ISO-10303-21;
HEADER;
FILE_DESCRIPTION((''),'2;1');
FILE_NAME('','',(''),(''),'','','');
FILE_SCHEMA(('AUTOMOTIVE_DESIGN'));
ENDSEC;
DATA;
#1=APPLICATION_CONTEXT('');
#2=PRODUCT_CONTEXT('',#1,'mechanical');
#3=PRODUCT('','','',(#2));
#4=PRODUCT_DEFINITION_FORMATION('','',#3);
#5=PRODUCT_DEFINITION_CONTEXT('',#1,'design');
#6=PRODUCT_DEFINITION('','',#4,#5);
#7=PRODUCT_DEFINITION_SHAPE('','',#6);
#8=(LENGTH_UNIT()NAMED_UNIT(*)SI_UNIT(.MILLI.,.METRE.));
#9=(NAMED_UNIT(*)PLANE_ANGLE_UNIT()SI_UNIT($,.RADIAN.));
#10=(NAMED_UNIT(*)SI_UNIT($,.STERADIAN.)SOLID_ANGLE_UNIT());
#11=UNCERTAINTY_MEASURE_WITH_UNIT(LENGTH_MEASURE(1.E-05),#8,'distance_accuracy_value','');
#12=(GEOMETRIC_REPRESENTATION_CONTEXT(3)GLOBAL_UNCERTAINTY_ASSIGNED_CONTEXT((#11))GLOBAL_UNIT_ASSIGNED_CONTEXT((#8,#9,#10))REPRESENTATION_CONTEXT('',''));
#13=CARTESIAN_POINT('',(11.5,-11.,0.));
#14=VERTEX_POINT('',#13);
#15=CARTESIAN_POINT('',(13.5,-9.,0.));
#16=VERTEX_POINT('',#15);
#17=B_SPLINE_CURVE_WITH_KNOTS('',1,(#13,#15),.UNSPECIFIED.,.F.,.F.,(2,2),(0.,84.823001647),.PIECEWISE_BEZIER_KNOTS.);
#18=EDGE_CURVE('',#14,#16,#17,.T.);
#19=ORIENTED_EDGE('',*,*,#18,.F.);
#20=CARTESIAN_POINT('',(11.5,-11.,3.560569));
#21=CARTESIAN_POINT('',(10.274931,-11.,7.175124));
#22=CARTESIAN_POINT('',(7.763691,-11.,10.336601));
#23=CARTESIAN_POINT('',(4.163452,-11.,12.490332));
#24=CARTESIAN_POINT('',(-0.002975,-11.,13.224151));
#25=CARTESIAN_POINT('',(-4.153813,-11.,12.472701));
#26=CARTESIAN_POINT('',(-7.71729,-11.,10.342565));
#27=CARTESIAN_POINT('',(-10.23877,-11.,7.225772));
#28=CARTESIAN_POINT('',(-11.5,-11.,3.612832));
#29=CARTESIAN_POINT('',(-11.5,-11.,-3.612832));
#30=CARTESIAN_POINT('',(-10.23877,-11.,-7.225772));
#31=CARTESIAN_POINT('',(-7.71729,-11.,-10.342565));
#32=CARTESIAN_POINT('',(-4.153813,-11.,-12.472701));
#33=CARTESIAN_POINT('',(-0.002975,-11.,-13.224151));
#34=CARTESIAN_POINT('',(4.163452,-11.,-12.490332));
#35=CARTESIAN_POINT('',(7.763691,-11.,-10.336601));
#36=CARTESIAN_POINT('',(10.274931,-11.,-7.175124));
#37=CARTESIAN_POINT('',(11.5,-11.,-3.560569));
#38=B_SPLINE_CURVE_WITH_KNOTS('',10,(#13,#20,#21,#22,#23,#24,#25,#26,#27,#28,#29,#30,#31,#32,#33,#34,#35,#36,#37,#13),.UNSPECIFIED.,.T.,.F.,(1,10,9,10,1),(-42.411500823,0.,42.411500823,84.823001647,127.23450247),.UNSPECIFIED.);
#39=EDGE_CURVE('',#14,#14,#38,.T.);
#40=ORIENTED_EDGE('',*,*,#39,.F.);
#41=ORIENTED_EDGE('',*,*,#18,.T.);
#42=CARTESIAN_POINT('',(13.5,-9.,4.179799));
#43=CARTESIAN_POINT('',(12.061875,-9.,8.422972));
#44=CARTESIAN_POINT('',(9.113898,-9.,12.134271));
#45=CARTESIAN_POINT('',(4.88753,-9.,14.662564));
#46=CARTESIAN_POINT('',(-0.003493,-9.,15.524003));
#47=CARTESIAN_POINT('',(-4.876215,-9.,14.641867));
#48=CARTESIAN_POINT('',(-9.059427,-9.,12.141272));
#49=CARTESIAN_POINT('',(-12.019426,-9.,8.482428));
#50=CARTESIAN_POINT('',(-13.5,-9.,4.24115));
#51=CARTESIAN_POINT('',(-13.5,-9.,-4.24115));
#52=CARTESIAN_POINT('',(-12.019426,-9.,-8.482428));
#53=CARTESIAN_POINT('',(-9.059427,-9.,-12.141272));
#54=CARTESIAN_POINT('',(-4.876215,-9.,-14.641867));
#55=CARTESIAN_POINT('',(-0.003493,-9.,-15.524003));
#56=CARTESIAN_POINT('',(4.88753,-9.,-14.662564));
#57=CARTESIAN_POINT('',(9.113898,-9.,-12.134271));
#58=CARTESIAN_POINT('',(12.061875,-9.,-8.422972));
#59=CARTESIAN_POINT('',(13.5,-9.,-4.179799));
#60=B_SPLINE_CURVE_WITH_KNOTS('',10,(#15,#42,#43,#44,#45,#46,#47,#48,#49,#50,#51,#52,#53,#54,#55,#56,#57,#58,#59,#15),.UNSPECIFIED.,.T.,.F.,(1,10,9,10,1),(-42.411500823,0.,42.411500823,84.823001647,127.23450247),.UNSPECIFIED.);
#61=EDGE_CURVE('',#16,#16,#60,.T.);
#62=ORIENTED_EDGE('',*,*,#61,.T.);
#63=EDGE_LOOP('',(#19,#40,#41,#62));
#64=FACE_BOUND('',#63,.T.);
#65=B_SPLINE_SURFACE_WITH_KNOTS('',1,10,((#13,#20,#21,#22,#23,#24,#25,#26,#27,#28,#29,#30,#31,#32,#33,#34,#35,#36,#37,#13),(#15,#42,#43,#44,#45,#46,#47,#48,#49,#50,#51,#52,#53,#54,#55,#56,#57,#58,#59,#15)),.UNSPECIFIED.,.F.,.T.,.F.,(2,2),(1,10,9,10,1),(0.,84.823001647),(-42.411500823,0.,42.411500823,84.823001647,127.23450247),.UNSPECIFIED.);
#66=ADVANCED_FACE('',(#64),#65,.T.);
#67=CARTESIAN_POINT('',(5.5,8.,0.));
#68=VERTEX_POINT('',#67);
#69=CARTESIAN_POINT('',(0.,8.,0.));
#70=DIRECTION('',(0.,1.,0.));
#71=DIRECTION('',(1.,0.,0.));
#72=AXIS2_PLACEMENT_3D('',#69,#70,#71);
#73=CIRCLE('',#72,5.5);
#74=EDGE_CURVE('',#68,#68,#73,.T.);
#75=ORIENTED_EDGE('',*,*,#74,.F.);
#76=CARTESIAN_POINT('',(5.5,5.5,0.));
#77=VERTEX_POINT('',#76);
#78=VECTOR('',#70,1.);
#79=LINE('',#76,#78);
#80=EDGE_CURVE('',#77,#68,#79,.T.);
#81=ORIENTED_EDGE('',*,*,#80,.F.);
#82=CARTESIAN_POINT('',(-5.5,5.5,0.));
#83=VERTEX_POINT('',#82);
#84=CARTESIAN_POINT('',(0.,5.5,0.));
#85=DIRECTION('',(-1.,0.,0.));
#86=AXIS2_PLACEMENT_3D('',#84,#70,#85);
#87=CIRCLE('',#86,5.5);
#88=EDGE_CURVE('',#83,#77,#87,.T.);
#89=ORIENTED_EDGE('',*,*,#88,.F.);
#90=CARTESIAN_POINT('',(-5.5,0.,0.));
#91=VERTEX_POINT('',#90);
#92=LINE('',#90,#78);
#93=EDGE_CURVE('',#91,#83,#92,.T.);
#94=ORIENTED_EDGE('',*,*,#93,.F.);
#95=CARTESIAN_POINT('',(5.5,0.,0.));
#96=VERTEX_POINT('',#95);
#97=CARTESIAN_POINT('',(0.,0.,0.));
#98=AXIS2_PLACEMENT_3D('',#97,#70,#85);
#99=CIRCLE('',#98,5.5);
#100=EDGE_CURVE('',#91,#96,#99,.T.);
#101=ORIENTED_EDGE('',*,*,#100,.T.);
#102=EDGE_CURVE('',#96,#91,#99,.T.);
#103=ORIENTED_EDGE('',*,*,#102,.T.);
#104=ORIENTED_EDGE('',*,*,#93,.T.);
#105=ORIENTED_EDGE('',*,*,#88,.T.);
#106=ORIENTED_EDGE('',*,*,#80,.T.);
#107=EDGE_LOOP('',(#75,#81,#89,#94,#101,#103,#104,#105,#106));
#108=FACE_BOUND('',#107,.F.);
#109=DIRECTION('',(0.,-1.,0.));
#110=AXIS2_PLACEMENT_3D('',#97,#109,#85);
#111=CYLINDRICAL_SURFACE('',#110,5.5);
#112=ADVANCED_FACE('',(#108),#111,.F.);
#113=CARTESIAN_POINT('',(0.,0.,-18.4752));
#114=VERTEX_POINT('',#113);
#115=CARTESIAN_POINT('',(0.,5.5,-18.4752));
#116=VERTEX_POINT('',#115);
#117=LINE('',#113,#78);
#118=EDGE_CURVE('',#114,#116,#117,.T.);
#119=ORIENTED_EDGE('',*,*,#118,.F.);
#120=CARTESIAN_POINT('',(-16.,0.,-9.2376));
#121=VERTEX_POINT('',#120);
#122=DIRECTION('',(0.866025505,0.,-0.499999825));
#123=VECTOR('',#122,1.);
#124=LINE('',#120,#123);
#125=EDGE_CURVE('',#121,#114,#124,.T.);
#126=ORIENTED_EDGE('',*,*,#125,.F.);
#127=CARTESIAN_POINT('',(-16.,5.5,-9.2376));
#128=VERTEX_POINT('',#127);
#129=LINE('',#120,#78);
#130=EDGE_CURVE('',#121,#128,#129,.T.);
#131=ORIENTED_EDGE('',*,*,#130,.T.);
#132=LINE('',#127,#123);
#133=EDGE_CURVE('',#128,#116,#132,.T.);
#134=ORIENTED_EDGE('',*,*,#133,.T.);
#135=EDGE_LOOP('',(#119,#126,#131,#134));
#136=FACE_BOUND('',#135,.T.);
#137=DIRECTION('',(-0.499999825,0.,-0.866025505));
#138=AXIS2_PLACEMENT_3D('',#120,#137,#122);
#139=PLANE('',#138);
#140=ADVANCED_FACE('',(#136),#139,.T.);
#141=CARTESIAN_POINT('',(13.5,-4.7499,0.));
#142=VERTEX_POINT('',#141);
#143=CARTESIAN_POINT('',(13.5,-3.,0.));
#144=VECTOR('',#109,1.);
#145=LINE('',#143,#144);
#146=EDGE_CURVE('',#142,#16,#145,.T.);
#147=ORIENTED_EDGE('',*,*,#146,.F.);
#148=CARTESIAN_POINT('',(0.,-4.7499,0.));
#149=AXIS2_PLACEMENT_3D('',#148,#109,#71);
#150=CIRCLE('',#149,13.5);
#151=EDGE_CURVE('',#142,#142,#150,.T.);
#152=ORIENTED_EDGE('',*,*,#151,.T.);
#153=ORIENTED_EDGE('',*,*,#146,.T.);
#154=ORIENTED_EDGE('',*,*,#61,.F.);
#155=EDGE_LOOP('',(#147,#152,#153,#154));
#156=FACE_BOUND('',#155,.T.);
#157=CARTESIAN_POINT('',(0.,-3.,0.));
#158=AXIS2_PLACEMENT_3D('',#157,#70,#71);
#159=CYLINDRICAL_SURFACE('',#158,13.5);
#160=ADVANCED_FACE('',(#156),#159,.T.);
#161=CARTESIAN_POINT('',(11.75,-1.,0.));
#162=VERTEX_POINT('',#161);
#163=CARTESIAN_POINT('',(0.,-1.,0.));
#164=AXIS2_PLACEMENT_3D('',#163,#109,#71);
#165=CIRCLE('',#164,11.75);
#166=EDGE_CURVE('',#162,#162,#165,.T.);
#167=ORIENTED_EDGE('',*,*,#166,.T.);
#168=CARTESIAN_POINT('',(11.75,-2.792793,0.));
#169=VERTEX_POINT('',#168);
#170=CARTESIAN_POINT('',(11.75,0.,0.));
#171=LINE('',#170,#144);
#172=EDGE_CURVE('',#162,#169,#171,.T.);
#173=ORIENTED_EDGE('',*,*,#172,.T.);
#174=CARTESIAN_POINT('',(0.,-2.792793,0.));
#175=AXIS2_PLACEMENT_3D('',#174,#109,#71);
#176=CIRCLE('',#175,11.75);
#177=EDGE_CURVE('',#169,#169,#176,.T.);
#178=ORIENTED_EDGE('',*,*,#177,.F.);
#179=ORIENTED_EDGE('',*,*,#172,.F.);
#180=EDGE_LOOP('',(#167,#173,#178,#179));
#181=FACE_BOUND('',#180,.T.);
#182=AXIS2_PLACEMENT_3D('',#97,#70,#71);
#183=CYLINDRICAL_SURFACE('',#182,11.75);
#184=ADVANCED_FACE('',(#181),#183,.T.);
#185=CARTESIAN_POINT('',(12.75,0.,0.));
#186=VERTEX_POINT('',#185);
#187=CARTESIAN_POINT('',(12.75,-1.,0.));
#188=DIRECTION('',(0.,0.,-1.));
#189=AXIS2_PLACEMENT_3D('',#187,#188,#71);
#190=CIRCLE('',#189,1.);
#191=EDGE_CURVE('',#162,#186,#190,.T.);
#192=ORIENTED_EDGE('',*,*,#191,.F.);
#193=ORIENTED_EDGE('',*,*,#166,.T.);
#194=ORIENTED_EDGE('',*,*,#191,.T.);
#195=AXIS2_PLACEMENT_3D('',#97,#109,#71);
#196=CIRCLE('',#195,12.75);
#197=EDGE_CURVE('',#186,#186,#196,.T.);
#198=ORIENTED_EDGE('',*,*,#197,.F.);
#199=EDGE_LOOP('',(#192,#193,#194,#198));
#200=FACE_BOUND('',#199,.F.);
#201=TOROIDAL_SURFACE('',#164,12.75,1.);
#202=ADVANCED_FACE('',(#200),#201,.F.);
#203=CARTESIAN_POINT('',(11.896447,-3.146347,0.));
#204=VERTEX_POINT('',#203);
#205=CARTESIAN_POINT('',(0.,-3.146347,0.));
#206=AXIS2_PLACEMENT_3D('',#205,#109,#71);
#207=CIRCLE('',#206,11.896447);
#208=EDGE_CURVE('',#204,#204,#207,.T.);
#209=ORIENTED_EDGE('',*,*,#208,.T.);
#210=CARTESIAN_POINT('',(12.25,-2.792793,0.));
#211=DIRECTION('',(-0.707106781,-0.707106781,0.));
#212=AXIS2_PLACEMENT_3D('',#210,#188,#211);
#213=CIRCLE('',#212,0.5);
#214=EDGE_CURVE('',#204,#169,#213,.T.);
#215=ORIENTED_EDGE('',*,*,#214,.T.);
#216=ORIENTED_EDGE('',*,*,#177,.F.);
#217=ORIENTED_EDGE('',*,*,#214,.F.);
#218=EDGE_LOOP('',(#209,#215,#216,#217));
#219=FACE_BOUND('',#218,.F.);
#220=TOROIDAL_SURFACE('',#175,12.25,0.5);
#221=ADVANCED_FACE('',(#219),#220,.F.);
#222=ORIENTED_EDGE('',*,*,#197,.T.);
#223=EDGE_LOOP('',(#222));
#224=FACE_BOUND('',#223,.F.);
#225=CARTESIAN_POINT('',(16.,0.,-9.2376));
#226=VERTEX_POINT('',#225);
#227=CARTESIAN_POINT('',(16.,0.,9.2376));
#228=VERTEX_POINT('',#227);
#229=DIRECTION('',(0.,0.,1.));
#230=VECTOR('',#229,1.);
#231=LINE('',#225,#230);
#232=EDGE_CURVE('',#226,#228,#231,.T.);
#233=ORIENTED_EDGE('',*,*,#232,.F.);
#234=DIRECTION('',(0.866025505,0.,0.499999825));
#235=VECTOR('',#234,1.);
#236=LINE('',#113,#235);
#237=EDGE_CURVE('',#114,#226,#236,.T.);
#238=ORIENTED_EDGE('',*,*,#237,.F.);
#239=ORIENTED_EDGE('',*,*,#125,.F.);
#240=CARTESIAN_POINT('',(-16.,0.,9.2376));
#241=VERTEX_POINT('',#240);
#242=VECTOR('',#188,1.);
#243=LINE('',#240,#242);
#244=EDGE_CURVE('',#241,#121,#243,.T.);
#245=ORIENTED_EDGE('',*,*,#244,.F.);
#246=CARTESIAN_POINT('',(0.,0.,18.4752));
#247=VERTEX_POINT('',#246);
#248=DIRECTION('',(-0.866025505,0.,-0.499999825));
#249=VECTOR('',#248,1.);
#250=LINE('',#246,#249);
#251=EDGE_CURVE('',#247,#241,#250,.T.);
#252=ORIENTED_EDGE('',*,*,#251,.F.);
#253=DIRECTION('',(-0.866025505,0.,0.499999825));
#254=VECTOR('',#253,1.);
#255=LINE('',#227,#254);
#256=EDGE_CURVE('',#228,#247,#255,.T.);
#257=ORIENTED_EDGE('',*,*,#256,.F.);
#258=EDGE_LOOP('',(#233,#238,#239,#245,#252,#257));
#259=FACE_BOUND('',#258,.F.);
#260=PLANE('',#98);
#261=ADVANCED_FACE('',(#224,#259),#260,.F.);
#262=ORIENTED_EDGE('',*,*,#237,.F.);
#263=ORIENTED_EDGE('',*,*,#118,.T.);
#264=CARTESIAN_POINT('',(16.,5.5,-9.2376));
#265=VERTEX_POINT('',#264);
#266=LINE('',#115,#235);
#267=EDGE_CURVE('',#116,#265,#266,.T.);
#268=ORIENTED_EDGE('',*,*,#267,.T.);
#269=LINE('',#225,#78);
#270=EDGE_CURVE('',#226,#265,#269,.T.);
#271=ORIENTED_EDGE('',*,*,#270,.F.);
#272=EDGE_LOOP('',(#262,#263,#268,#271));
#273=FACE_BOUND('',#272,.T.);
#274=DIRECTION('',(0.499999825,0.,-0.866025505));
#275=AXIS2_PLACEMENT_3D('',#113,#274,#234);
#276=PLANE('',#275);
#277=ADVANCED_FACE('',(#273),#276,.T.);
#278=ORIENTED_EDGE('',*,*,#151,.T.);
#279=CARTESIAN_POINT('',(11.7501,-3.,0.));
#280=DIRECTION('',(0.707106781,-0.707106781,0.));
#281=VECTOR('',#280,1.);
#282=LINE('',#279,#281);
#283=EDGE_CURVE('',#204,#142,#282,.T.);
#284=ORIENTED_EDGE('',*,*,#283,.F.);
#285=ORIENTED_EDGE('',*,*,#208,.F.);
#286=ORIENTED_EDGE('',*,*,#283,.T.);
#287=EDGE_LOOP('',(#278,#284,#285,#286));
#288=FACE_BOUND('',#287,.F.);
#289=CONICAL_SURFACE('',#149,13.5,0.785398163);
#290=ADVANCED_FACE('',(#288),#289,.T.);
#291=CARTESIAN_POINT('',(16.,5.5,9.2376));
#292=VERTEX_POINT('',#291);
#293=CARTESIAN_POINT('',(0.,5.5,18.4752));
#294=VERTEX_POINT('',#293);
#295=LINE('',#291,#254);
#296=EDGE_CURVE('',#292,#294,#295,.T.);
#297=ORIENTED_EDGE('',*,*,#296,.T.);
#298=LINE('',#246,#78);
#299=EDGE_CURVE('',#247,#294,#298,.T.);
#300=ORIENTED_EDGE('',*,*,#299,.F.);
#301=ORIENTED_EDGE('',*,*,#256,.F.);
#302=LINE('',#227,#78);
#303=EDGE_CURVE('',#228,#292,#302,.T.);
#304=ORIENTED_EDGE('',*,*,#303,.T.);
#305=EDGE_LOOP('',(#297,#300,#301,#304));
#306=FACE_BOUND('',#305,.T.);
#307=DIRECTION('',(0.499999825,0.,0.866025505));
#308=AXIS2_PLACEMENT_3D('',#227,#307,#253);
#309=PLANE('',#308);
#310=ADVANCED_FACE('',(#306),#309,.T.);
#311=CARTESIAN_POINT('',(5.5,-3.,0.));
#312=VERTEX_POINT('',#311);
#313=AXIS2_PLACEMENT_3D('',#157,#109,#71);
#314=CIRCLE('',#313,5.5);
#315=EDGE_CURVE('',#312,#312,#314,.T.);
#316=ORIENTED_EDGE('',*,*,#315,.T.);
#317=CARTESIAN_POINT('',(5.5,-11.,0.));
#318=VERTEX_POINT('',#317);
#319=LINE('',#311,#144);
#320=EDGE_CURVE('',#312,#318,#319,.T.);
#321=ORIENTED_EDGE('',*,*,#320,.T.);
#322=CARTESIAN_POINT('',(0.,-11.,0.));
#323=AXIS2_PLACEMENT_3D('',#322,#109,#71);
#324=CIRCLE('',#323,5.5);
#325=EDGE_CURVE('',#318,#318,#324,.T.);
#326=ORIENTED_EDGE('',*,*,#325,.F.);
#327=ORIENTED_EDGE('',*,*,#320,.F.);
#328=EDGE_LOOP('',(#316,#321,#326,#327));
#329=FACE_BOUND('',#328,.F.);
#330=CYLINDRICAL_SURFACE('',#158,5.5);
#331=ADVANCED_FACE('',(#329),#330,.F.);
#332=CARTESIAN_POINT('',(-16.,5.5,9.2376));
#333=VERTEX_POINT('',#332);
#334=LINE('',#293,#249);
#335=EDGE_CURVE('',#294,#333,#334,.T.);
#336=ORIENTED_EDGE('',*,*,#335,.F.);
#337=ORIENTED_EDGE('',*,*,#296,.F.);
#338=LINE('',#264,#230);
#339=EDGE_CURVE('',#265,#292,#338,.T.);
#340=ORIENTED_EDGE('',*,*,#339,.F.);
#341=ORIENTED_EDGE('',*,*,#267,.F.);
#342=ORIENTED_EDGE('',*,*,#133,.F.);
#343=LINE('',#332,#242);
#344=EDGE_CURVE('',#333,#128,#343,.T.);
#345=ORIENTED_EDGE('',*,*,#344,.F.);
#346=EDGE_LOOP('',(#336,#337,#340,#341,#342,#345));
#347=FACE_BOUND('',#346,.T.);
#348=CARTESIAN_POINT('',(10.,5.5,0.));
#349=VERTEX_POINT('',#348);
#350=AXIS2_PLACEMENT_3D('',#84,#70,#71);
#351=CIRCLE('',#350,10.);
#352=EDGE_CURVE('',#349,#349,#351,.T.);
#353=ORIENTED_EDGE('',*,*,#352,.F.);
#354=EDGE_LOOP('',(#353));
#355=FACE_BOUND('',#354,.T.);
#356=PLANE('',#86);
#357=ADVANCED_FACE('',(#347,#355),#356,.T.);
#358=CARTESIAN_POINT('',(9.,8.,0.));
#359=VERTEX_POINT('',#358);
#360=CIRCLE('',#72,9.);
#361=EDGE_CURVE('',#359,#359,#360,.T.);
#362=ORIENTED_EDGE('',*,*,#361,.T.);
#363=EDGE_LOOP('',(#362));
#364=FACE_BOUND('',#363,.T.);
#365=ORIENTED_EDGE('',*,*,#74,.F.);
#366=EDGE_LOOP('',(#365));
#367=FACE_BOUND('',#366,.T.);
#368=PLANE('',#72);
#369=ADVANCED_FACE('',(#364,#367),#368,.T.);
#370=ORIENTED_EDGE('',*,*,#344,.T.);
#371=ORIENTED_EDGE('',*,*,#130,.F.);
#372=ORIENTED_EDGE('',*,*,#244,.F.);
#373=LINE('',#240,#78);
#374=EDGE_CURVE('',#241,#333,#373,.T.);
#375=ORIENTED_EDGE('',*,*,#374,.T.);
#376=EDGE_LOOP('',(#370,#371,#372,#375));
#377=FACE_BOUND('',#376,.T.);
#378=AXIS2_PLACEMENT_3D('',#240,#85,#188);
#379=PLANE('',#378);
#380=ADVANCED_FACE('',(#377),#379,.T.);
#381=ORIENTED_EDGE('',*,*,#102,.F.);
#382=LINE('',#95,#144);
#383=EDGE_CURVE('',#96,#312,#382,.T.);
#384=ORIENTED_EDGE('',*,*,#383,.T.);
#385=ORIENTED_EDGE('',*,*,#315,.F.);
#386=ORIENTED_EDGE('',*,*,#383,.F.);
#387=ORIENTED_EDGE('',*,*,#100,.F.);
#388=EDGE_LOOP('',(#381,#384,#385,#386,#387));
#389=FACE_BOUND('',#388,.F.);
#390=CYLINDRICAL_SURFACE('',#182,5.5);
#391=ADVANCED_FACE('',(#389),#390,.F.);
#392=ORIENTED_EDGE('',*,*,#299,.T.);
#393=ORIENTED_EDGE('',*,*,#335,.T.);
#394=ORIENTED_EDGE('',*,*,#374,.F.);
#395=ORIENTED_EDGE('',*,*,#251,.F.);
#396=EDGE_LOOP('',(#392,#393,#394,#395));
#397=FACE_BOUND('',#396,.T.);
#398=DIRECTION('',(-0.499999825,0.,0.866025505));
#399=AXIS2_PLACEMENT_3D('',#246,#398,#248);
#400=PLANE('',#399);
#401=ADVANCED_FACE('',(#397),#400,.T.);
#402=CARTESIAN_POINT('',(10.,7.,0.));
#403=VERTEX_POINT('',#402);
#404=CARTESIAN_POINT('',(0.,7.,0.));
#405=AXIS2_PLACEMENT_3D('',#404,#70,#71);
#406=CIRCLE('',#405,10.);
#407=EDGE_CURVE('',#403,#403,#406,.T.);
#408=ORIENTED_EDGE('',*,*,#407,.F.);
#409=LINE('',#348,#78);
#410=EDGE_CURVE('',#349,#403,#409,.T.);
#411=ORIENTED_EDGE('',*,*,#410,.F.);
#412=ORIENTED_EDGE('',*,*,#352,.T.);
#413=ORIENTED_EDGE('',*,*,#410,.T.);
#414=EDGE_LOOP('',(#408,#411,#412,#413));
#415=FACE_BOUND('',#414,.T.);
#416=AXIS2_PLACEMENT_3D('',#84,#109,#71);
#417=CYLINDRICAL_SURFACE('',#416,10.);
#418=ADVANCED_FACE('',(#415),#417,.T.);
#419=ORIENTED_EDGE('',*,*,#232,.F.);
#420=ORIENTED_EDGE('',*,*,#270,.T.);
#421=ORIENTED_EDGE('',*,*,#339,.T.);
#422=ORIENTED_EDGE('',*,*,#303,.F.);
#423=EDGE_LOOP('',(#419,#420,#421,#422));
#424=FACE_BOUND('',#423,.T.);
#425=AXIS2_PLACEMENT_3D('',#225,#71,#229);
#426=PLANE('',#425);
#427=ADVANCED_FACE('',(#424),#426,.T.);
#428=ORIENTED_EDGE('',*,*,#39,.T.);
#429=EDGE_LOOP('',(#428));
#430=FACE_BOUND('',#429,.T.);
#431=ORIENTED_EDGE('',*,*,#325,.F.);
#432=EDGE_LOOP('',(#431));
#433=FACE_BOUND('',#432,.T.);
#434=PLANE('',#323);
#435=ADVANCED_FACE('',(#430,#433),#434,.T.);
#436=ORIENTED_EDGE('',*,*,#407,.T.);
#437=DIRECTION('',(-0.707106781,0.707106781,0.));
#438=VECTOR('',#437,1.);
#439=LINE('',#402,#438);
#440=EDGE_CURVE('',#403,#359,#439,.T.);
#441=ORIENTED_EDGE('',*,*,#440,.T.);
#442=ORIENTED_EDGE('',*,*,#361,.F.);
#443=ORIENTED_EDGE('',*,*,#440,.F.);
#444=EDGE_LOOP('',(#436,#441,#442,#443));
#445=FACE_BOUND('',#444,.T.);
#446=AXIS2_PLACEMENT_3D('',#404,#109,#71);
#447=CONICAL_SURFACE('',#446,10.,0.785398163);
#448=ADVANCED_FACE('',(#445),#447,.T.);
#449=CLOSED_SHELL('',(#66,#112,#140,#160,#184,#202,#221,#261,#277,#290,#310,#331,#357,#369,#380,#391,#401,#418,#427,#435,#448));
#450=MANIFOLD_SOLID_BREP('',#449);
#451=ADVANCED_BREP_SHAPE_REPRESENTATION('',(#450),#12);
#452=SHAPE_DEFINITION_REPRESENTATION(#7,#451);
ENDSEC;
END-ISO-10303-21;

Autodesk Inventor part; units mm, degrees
ref_plane "YZ Plane" through (0, 0, 0) normal (1, 0, 0) x (0, 1, 0)
ref_plane "XZ Plane" through (0, 0, 0) normal (0, 1, 0) x (-1, 0, 0)
ref_plane "XY Plane" through (0, 0, 0) normal (0, 0, 1) x (1, 0, 0)
sketch "Эскиз1" plane through (0, 0, 0) normal (0, 0, 1) x (1, 0, 0)
  point P0 (0, 0)
sketch "Эскиз2" plane through (0, 0, 0) normal (0, 1, 0) x (-1, 0, 0)
  line L0 (0, 18.4752) -> (16, 9.2376)
  line L1 (16, 9.2376) -> (16, -9.2376)
  line L2 (16, -9.2376) -> (0, -18.4752)
  line L3 (0, -18.4752) -> (-16, -9.2376)
  line L4 (-16, -9.2376) -> (-16, 9.2376)
  line L5 (-16, 9.2376) -> (0, 18.4752)
  circle A0 centre (0, 0) radius 5.5
  dimension "d0" = 32
  dimension "d1" = 11
extrude "Выдавливание1" add sketch "Эскиз2" along normal blind 5.5
sketch "Эскиз3" plane through (0, 5.5, 0) normal (0, 1, 0) x (1, 0, 0)
  circle A0 centre (0, 0) radius 5.5 projected
  circle A1 centre (0, 0) radius 10
  dimension "d4" = 20
extrude "Выдавливание2" add sketch "Эскиз3" along normal blind 2.5
chamfer "Фаска1" distance 1 angle 45 1 edges at (-10, 8, 0) measured on face at (8.3499, 8, 1.2365)
sketch "Эскиз4" plane through (0, 0, 0) normal (0, -1, 0) x (1, 0, 0)
  circle A0 centre (0, 0) radius 5.5 projected
  circle A1 centre (0, 0) radius 11.75
  dimension "d10" = 23.5
extrude "Выдавливание3" add sketch "Эскиз4" along normal blind 3
sketch "Эскиз5" plane through (0, -3, 0) normal (0, -1, 0) x (1, 0, 0)
  circle A0 centre (0, 0) radius 11.75 projected
  circle A1 centre (0, 0) radius 13.5
  dimension "d13" = 27
extrude "Выдавливание4" add sketch "Эскиз5" along normal blind 8
sketch "Эскиз6" plane through (0, -3, 0) normal (0, -1, 0) x (1, 0, 0)
  circle A0 centre (0, 0) radius 5.5 projected
  circle A1 centre (0, 0) radius 11.75 projected
extrude "Выдавливание5" add sketch "Эскиз6" along normal blind 8
thread "Резьба1" size "G 3/4-14" class "A" standard "BSP Pipe Threads" full length
chamfer "Фаска2" distance 2 angle 45 1 edges at (-13.5, -11, 0) measured on face at (12.6721, -11, -2.0142)
chamfer "Фаска3" distance 1.75 angle 45 1 edges at (-13.5, -3, 0)
fillet "Сопряжение1" radius 0.5 2 edges at (-11.7501, -3, 0) (-11.75, -3, 0)
fillet "Сопряжение2" radius 1 1 edges at (-11.75, 0, 0)
